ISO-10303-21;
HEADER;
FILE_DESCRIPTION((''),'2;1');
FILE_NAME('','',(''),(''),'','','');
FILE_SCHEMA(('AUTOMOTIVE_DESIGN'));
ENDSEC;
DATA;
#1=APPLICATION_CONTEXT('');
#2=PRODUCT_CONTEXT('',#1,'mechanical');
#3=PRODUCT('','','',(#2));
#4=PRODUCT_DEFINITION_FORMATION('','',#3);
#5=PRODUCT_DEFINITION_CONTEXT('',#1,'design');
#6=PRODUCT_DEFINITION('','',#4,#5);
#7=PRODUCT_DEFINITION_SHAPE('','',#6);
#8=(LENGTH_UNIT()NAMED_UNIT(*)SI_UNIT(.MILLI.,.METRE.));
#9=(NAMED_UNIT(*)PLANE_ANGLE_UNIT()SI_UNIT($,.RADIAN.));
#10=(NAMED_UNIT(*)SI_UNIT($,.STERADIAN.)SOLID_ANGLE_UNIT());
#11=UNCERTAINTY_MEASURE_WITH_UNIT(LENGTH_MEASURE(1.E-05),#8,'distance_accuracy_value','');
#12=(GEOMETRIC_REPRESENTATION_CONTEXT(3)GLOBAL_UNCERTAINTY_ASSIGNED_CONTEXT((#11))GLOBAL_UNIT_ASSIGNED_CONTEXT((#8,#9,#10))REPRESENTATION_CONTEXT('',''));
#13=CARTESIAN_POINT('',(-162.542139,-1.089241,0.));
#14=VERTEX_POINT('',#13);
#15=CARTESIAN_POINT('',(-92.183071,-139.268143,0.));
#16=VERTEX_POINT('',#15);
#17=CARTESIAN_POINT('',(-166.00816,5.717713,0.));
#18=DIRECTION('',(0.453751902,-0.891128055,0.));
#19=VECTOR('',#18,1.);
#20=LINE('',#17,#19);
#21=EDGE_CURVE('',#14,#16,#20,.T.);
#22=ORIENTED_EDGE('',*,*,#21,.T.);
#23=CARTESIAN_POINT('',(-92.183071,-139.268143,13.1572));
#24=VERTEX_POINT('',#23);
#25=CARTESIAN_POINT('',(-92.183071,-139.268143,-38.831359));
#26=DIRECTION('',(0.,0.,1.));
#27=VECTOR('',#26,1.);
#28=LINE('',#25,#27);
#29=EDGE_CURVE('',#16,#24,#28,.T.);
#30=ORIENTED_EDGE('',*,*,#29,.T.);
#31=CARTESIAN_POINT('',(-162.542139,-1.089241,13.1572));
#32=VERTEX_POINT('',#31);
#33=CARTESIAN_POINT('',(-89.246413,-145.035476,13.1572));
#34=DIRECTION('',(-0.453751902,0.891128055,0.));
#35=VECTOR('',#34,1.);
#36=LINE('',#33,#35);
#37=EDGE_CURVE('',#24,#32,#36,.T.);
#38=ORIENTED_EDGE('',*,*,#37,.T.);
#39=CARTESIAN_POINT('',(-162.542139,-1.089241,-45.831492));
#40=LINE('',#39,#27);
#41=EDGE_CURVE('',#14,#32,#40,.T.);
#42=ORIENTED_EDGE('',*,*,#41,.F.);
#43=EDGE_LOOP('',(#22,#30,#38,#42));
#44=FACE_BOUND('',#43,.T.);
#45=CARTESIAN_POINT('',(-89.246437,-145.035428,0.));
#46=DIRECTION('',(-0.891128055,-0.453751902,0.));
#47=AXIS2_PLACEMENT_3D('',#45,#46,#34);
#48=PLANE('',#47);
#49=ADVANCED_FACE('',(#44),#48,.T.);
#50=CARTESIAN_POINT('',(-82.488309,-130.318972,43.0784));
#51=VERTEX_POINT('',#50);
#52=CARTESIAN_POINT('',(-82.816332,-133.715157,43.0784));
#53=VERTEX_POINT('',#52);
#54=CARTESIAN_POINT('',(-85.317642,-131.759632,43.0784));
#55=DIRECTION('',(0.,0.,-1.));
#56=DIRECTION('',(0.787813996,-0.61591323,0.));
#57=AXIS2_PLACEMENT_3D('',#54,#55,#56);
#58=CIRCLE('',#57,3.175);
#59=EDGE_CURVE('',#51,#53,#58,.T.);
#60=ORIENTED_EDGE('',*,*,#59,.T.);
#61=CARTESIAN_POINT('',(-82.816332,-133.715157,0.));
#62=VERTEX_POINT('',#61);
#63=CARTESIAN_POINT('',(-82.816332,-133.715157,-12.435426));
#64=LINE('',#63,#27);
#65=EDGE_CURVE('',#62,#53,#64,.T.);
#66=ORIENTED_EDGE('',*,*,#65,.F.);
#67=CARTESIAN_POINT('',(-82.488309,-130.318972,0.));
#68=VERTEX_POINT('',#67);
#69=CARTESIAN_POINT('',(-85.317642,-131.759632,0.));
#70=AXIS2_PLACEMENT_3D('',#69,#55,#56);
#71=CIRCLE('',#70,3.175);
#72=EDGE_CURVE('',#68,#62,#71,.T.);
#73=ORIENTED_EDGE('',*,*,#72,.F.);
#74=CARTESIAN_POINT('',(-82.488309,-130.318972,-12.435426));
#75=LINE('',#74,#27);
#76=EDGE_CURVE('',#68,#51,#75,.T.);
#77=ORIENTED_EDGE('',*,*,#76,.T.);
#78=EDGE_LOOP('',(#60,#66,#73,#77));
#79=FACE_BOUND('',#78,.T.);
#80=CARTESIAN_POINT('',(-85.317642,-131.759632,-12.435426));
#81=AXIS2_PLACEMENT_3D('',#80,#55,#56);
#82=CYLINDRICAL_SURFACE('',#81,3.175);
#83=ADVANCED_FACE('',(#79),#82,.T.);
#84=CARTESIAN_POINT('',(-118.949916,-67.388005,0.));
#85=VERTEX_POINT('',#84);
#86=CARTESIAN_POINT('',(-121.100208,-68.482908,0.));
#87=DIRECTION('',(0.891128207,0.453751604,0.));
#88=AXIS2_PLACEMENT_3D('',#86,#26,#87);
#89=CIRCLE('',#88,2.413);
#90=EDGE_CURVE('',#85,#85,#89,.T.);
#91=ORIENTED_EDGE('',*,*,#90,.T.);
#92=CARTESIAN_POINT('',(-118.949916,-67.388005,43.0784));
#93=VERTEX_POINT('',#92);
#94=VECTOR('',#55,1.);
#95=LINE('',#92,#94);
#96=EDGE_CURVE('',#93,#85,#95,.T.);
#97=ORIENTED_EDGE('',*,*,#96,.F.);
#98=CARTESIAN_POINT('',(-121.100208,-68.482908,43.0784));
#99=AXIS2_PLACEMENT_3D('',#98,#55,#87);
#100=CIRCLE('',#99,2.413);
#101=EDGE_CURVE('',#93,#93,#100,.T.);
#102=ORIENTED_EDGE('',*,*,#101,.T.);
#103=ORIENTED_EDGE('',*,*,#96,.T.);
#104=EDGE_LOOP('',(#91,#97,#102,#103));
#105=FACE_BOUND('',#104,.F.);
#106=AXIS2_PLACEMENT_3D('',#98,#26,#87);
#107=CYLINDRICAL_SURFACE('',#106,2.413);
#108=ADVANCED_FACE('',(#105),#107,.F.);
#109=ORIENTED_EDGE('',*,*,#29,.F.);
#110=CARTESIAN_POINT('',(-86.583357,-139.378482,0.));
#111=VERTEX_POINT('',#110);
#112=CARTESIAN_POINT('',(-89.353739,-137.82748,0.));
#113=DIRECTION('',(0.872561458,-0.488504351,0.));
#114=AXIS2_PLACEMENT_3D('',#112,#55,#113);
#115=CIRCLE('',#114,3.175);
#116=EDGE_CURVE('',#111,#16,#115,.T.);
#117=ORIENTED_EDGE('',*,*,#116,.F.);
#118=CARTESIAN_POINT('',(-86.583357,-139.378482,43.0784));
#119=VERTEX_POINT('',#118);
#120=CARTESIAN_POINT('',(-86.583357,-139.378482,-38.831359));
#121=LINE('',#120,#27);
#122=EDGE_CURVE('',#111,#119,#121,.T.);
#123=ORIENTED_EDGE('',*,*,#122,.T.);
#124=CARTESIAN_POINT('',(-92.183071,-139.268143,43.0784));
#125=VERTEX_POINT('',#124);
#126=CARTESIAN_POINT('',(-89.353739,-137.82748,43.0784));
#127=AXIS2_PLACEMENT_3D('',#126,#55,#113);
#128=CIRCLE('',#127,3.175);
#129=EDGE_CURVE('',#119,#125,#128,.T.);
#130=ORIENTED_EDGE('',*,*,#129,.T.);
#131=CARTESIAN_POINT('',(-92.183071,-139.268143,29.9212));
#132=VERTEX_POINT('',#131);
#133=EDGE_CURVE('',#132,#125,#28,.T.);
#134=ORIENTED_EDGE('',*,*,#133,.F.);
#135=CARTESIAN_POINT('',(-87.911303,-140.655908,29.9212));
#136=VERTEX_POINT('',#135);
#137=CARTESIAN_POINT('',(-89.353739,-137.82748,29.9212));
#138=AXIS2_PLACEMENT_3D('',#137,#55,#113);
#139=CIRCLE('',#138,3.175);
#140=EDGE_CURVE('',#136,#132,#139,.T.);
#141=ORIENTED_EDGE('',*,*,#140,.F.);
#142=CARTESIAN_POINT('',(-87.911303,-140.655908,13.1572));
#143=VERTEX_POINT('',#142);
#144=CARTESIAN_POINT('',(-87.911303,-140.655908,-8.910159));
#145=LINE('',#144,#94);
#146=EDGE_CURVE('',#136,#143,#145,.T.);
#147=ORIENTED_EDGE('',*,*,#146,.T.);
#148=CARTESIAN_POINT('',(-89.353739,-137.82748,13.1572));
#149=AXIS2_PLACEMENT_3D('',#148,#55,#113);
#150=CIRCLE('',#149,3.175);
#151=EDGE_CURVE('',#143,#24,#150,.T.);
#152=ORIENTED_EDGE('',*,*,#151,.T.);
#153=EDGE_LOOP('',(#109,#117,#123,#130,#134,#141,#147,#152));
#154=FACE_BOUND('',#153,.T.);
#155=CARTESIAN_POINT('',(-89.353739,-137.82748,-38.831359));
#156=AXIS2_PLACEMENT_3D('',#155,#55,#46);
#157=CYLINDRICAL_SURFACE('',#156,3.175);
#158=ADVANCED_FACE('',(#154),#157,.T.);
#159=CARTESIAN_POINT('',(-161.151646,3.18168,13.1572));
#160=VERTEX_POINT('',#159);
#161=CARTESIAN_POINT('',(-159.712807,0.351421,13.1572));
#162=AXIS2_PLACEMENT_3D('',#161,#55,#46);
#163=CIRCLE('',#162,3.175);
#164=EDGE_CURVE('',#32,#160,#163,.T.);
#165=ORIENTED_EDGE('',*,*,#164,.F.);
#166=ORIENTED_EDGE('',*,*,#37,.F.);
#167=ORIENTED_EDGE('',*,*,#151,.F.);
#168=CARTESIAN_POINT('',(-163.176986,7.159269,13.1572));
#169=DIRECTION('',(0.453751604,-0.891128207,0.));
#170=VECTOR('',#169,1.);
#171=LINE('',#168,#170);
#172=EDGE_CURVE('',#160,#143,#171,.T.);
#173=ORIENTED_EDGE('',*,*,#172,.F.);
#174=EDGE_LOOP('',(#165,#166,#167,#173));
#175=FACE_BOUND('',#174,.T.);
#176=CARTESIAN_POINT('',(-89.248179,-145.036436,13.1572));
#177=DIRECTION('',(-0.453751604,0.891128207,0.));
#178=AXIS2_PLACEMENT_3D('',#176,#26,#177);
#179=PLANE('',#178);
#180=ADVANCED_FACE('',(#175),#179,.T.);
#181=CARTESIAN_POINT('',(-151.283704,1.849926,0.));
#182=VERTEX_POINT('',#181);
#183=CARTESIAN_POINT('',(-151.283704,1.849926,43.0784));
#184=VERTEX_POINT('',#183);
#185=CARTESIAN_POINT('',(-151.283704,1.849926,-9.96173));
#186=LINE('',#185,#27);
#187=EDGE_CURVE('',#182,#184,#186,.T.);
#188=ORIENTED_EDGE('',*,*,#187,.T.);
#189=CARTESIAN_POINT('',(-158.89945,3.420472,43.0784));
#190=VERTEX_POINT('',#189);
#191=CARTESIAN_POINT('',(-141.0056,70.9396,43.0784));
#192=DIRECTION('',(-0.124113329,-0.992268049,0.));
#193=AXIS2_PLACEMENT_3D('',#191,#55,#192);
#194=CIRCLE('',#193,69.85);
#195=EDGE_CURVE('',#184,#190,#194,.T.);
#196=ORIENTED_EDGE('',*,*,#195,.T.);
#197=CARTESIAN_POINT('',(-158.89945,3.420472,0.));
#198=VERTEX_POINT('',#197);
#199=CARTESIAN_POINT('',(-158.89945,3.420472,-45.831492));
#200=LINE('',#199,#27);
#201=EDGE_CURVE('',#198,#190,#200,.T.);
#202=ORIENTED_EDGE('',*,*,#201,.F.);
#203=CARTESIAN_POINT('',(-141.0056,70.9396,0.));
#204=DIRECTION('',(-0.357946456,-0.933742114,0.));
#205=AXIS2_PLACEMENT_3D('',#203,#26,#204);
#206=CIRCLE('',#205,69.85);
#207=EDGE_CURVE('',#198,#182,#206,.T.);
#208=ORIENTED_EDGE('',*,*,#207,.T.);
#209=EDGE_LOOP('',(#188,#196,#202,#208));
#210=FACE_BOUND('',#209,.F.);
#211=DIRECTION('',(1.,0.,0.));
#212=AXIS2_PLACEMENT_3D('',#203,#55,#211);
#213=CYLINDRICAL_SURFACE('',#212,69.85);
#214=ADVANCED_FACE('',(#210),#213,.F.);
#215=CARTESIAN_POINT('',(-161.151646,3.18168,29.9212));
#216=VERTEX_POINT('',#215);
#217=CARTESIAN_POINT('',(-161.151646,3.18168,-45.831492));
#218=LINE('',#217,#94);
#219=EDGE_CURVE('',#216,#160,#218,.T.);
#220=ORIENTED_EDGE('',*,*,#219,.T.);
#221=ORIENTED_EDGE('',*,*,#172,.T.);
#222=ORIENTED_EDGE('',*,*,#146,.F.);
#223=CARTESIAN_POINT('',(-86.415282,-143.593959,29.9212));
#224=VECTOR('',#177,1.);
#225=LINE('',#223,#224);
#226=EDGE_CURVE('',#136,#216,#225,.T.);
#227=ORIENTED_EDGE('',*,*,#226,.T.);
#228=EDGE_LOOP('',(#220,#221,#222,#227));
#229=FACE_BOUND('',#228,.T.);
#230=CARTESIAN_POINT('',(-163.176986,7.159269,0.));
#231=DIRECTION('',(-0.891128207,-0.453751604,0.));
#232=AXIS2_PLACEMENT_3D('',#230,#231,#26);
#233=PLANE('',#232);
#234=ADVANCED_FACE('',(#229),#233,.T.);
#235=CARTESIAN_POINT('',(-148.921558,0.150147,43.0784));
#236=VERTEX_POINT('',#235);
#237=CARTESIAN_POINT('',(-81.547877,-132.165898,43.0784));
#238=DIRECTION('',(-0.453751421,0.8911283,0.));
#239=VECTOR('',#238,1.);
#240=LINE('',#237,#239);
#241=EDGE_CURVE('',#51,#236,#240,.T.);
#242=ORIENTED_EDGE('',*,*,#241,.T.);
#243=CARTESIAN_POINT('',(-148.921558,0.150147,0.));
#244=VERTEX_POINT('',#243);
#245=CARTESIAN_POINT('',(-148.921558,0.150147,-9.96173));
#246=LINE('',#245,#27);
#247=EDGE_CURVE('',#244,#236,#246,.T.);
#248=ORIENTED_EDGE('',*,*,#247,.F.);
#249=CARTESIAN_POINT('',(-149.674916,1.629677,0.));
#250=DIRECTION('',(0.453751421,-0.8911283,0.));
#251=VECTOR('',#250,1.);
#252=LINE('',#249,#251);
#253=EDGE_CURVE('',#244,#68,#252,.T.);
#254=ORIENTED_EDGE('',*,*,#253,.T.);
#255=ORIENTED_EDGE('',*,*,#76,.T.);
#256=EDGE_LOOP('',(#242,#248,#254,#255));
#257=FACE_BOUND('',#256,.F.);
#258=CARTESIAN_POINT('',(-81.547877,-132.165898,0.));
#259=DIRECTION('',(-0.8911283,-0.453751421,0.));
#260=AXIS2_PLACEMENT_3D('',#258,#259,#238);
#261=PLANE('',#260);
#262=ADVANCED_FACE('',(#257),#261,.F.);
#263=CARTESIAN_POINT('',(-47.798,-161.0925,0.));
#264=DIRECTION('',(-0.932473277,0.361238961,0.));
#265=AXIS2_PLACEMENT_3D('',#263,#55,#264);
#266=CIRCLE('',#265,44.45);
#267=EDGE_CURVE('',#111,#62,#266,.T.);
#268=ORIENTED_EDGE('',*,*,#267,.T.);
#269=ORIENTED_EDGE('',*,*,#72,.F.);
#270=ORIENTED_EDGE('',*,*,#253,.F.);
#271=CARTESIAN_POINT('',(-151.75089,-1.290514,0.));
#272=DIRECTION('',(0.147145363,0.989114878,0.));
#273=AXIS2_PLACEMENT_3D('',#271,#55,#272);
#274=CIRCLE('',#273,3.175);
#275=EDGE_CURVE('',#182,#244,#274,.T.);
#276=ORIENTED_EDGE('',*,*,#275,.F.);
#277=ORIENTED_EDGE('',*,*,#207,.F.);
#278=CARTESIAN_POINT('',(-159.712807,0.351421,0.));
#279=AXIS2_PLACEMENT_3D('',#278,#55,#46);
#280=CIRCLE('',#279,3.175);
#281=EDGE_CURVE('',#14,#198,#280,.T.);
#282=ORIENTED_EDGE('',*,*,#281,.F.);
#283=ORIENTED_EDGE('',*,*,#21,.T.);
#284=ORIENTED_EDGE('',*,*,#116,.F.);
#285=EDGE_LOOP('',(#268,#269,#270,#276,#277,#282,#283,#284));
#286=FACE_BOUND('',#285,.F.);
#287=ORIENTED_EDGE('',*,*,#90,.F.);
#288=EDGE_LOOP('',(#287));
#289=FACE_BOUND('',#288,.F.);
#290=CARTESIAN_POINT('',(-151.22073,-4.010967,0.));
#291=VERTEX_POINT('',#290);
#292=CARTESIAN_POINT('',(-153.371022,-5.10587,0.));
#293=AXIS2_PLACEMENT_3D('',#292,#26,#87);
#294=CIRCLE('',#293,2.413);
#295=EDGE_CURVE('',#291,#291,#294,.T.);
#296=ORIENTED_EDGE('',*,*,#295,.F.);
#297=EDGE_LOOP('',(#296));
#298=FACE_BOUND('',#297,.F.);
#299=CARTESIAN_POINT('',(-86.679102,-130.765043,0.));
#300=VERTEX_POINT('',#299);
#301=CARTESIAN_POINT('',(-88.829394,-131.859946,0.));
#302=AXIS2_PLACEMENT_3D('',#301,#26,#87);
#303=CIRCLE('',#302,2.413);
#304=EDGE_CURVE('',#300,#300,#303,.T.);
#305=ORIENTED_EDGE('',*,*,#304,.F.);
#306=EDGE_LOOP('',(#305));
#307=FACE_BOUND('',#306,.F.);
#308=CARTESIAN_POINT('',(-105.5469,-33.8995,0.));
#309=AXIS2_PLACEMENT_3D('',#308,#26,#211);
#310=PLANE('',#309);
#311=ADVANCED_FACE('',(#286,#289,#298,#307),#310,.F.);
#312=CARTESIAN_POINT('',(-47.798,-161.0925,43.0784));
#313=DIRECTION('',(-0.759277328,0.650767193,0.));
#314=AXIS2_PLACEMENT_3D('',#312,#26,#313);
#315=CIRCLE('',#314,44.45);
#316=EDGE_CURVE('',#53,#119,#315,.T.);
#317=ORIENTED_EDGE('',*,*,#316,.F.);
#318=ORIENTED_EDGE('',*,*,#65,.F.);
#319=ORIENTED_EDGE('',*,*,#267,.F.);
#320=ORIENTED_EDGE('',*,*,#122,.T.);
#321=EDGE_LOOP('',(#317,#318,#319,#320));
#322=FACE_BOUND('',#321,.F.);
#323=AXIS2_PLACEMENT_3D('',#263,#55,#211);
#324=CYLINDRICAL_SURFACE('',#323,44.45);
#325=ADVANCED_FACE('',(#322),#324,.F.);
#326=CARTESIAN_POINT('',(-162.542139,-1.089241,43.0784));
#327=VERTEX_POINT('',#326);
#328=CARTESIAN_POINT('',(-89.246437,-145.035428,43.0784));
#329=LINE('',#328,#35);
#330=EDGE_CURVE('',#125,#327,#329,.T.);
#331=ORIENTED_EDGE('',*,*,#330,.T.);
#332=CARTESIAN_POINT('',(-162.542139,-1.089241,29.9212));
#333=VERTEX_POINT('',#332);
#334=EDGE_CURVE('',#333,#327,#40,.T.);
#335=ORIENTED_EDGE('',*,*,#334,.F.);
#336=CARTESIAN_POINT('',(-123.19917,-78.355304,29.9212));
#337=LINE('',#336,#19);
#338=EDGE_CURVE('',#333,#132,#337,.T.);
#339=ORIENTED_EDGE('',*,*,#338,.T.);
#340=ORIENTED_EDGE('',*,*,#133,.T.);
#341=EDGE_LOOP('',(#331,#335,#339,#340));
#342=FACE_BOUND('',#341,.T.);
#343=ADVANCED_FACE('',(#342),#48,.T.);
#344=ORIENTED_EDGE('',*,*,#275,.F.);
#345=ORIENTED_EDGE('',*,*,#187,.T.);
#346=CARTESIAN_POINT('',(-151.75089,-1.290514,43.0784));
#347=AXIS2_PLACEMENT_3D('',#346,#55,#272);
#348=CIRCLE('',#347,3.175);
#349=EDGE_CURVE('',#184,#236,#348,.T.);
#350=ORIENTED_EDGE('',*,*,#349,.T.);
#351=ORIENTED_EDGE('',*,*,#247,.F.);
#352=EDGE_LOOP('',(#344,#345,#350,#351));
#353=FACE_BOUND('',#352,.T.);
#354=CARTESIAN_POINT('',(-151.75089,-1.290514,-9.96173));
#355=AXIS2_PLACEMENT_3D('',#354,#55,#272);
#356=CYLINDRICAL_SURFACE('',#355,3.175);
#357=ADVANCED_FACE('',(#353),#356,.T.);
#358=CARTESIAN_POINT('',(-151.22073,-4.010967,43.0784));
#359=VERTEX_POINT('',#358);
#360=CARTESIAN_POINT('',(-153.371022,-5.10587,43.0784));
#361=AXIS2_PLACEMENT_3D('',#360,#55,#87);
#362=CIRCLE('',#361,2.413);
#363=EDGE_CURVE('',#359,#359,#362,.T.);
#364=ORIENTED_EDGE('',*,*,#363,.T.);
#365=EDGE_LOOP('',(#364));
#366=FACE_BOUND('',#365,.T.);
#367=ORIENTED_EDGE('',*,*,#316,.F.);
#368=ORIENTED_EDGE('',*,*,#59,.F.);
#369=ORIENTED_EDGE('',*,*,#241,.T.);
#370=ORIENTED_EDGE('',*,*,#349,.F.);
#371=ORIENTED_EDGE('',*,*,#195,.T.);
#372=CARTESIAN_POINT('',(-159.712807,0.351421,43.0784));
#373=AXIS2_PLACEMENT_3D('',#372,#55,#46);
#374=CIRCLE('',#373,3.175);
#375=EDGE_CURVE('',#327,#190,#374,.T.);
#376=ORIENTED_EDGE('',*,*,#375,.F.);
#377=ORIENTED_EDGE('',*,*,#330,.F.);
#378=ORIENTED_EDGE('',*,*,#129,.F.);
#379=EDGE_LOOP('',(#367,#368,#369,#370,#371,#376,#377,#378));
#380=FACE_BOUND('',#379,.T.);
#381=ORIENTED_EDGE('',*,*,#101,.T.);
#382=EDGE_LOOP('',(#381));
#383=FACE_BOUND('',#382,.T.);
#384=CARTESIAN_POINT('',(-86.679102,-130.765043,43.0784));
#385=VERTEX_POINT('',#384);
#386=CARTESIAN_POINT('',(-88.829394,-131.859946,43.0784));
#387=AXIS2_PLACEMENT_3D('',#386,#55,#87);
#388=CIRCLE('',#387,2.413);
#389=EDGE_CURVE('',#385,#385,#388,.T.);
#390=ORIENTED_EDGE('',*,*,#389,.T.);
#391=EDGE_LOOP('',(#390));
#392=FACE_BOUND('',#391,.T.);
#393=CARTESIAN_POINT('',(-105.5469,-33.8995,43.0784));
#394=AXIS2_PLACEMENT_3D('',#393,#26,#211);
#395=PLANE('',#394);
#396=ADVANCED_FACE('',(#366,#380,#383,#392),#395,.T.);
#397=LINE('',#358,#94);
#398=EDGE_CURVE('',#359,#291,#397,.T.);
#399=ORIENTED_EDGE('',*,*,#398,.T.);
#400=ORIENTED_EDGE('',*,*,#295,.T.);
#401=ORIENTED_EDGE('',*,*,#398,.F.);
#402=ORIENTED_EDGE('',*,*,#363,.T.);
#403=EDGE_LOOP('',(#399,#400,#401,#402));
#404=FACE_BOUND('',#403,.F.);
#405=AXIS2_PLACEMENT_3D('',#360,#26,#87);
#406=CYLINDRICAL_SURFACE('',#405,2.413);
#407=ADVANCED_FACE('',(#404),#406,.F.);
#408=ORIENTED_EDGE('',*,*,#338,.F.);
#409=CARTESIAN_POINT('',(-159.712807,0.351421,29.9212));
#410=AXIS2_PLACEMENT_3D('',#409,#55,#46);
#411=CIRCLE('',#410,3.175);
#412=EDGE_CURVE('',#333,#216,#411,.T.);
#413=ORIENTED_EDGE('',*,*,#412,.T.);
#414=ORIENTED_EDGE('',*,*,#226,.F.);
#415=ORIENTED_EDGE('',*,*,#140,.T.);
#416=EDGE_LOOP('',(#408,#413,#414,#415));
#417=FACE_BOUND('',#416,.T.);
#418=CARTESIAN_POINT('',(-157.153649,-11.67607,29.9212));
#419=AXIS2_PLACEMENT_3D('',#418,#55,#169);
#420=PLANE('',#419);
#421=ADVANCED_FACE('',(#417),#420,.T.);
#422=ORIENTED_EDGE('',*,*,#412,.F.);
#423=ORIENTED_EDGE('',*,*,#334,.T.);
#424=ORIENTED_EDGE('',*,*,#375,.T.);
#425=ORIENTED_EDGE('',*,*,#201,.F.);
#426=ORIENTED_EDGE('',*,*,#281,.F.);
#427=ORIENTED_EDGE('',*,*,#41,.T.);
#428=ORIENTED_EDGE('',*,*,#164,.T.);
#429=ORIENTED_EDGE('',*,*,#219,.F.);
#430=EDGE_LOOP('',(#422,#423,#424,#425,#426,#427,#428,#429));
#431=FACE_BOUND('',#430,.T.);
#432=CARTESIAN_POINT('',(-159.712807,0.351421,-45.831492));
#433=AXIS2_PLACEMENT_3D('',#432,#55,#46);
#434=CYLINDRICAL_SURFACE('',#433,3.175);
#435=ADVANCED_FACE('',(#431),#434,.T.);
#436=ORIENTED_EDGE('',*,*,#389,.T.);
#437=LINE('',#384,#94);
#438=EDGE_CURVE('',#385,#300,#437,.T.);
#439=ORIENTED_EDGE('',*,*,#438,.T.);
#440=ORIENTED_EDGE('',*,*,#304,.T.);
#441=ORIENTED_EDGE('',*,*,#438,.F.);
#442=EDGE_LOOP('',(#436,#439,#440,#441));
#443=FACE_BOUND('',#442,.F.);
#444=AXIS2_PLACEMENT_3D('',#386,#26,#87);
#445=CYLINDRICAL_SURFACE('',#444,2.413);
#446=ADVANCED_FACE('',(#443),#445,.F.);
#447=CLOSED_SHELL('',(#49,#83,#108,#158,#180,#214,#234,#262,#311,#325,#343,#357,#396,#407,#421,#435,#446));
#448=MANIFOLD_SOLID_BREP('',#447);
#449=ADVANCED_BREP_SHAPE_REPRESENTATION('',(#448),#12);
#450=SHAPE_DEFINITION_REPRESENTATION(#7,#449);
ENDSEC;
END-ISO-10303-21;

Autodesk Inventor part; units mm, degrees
ref_plane "Work Plane1" through (-105.5469, -33.8995, 0) normal (0, 0, 1) x (1, 0, 0)
sketch "Sketch1" plane through (-105.5469, -33.8995, 0) normal (0, 0, 1) x (1, 0, 0)
  circle A0 centre (51.4164, 20.6909) radius 2.413 projected
  circle A1 centre (61.5426, -29.0897) radius 2.413 projected
  circle A2 centre (41.2902, 70.4714) radius 2.413 projected
  circle A3 centre (71.6688, -78.8702) radius 2.413 projected
  circle A4 centre (27.8827, -36.0288) radius 3.175 projected
  line L0 (21.5564, -145.7309) -> (-91.4082, 76.2381) projected
  line L1 (59.5069, 74.2446) -> (98.755, -118.7966) projected
  line L2 (15.2228, 144.056) -> (44.9436, 105.9012) projected
  line L3 (63.6348, -131.723) -> (58.903, -119.9375) projected
  line L4 (53.0129, -122.3028) -> (57.7447, -134.0883) projected
  arc A5 (3.7348, 135.3868) -> (-79.7406, 82.2913) centre (-35.4587, 104.8391) ccw
  line L5 (3.7348, 135.3868) -> (33.4679, 97.2384)
  arc A6 (45.3974, 71.3204) -> (33.4679, 97.2384) centre (-15.7425, 58.8835) ccw
  line L6 (45.3974, 71.3204) -> (84.6647, -121.7179)
  arc A7 (33.2723, -139.6562) -> (84.6647, -121.7179) centre (57.7489, -127.193) ccw
  arc A8 (2.9524, 134.777) -> (-78.8566, 82.7414) centre (-35.4587, 104.8391) ccw
  line L7 (2.9524, 134.777) -> (32.6855, 96.6286)
  arc A9 (44.4253, 71.1227) -> (32.6855, 96.6286) centre (-15.7425, 58.8835) ccw
  line L8 (44.4253, 71.1227) -> (83.6926, -121.9156)
  arc A10 (34.1563, -139.2061) -> (83.6926, -121.9156) centre (57.7489, -127.193) ccw
  line L9 (34.1563, -139.2061) -> (-78.8566, 82.7414)
  arc A11 (-4.5602, 128.9216) -> (-70.3686, 87.0634) centre (-35.4587, 104.8391) ccw
  line L10 (-4.5602, 128.9216) -> (25.1729, 90.7732)
  arc A12 (35.0915, 69.224) -> (25.1729, 90.7732) centre (-15.7425, 58.8835) ccw
  line L11 (35.0915, 69.224) -> (74.3588, -123.8143)
  arc A13 (42.6443, -134.8841) -> (74.3588, -123.8143) centre (57.7489, -127.193) ccw
  line L12 (42.6443, -134.8841) -> (-70.3686, 87.0634)
  arc A14 (5.4566, 136.7288) -> (-81.686, 81.3007) centre (-35.4587, 104.8391) ccw
  line L13 (5.4566, 136.7288) -> (35.1897, 98.5804)
  arc A15 (47.5366, 71.7556) -> (35.1897, 98.5804) centre (-15.7425, 58.8835) ccw
  line L14 (47.5366, 71.7556) -> (86.8039, -121.2827)
  arc A16 (31.327, -140.6467) -> (86.8039, -121.2827) centre (57.7489, -127.193) ccw
  line L15 (31.327, -140.6467) -> (-81.686, 81.3007)
  circle A17 centre (57.7489, -127.193) radius 44.45
  circle A18 centre (-35.4587, 104.8391) radius 69.85
  circle A19 centre (-47.8242, 28.7936) radius 2.413 projected
  circle A20 centre (-15.5534, -34.5834) radius 2.413 projected
  circle A21 centre (16.7174, -97.9605) radius 2.413 projected
  line L16 (-33.1344, 24.0942) -> (34.7456, 18.5458) projected
  line L17 (36.5081, 12.9323) -> (-6.2049, -22.3208) projected
  line L18 (-20.7511, -20.2117) -> (-39.1333, 15.9083) projected
  line L19 (38.3036, 25.8999) -> (-20.4951, 30.706) projected
  line L20 (-21.5821, 36.7465) -> (30.7819, 61.2351) projected
  line L21 (44.0707, 55.5202) -> (48.097, 35.7165) projected
  line L22 (-53.0081, 43.1715) -> (-61.3301, 59.5239) projected
  line L23 (17.8998, 109.9146) -> (30.1007, 94.2514) projected
  line L24 (27.5547, 68.1378) -> (-5.8444, 52.5185) projected
  line L25 (27.1825, -114.3985) -> (25.3807, -110.8581) projected
  line L26 (32.1964, -96.6363) -> (38.137, -94.5724) projected
  line L27 (74.4344, -93.8236) -> (75.2107, -97.6416) projected
  line L28 (50.495, -96.7953) -> (49.4394, -94.1661) projected
  line L29 (51.3425, -89.9843) -> (60.23, -86.8964) projected
  line L30 (-10.1341, 54.212) -> (-12.6231, 60.4113) projected
  line L31 (-19.6913, 57.573) -> (-16.9128, 50.6526) projected
  line L32 (-18.5132, 46.5938) -> (-35.734, 38.5403) projected
  line L33 (42.124, -96.3889) -> (43.4268, -99.6336) projected
  arc A22 (40.3328, 7.2327) -> (41.7343, 8.6241) centre (33.4597, 15.5569) ccw projected
  arc A23 (45.6191, 9.409) -> (41.7343, 8.6241) centre (44.1679, 6.585) ccw projected
  arc A24 (45.6191, 9.409) -> (50.3997, 8.0475) centre (51.4164, 20.6909) ccw projected
  arc A25 (53.2564, 5.5162) -> (50.3997, 8.0475) centre (50.1452, 4.8827) ccw projected
  line L34 (53.2564, 5.5162) -> (57.2026, -13.8642) projected
  arc A26 (55.534, -17.3261) -> (57.2026, -13.8642) centre (54.0915, -14.4977) ccw projected
  arc A27 (55.534, -17.3261) -> (49.5198, -23.895) centre (61.311, -28.6529) ccw projected
  arc A28 (46.8024, -25.8738) -> (49.5198, -23.895) centre (46.5755, -22.7069) ccw projected
  line L35 (46.8024, -25.8738) -> (37.6772, -26.5277) projected
  arc A29 (35.5367, -25.8944) -> (37.6772, -26.5277) centre (37.4502, -23.3608) ccw projected
  arc A30 (35.5367, -25.8944) -> (18.8618, -27.0893) centre (27.8827, -36.0288) ccw projected
  arc A31 (16.8336, -28.0213) -> (18.8618, -27.0893) centre (16.6066, -24.8545) ccw projected
  line L36 (16.8336, -28.0213) -> (0.7655, -29.1728) projected
  arc A32 (-0.3587, -26.3652) -> (0.7655, -29.1728) centre (0.652, -27.5893) ccw projected
  line L37 (-0.3587, -26.3652) -> (40.3328, 7.2327) projected
  arc A33 (12.0706, -61.7398) -> (8.1483, -51.9706) centre (20.8352, -52.5488) ccw projected
  line L38 (25.9855, -70.6908) -> (17.4507, -83.8024) projected
  line L39 (11.5059, -83.5949) -> (-6.8763, -47.4749) projected
  line L40 (-0.2859, -37.1185) -> (-0.1921, -37.1119) projected
  line L41 (74.8789, -123.628) -> (78.6564, -122.8604) projected
  line L42 (0.38, 132.4063) -> (2.0588, 130.251) projected
  line L43 (38.7029, -137.0353) -> (37.8849, -135.428) projected
  line L44 (38.579, -133.2932) -> (44.3373, -130.3617) projected
  line L45 (12.0706, -61.7398) -> (13.7631, -65.9552) projected
  line L46 (17.8911, -67.7189) -> (22.1428, -66.0115) projected
  line L47 (2.9792, -39.0961) -> (8.1483, -51.9706) projected
  ellipse E0 centre (-34.8429, 105.035) end of major axis (-54.1736, 165.5211) minor radius 63.4728 (15.2228, 144.056) -> (-91.4082, 76.2381) ccw projected
  ellipse E1 centre (58.3238, -127.0129) end of major axis (45.7589, -87.6969) minor radius 41.2573 (21.5564, -145.7309) -> (98.755, -118.7966) ccw projected
  ellipse E2 centre (-15.1352, 59.076) end of major axis (-38.3321, 131.6593) minor radius 76.1674 (59.5069, 74.2446) -> (44.9436, 105.9012) ccw projected
  ellipse E3 centre (-34.8429, 105.035) end of major axis (-38.9507, 117.8883) minor radius 13.488 projected
  ellipse E4 centre (60.6898, -132.9057) end of major axis (59.7232, -129.8814) minor radius 3.1736 (57.7447, -134.0883) -> (63.6348, -131.723) ccw projected
  ellipse E5 centre (55.9579, -121.1202) end of major axis (54.9914, -118.0958) minor radius 3.1736 (58.903, -119.9375) -> (53.0129, -122.3028) ccw projected
  ellipse E6 centre (-47.0283, 29.0524) end of major axis (-50.8944, 41.1496) minor radius 12.6946 (-38.4497, 19.689) -> (-36.1193, 22.5544) ccw projected
  ellipse E7 centre (-33.3921, 20.9299) end of major axis (-34.3586, 23.9542) minor radius 3.1736 (-33.1344, 24.0942) -> (-36.1193, 22.5544) ccw projected
  ellipse E8 centre (34.4879, 15.3814) end of major axis (33.5214, 18.4057) minor radius 3.1736 (36.5081, 12.9323) -> (34.7456, 18.5458) ccw projected
  ellipse E9 centre (-8.2251, -19.8717) end of major axis (-7.2586, -22.896) minor radius 3.1736 (-9.5343, -22.7635) -> (-6.2049, -22.3208) ccw projected
  ellipse E10 centre (-14.7713, -34.3308) end of major axis (-18.6374, -22.2336) minor radius 12.6946 (-9.5343, -22.7635) -> (-17.2925, -21.8836) ccw projected
  ellipse E11 centre (-17.9228, -18.7718) end of major axis (-16.9563, -21.7962) minor radius 3.1736 (-20.7511, -20.2117) -> (-17.2925, -21.8836) ccw projected
  ellipse E12 centre (-36.305, 17.3481) end of major axis (-35.3385, 14.3238) minor radius 3.1736 (-38.4497, 19.689) -> (-39.1333, 15.9083) ccw projected
  ellipse E13 centre (38.5613, 29.0642) end of major axis (39.5278, 26.0399) minor radius 3.1736 (38.3036, 25.8999) -> (41.2885, 27.4397) ccw projected
  ellipse E14 centre (-20.2374, 33.8704) end of major axis (-19.2708, 30.8461) minor radius 3.1736 (-21.5821, 36.7465) -> (-20.4951, 30.706) ccw projected
  ellipse E15 centre (32.1266, 58.3589) end of major axis (31.1601, 61.3832) minor radius 3.1736 (34.1165, 60.8317) -> (30.7819, 61.2351) ccw projected
  ellipse E16 centre (42.0762, 70.723) end of major axis (38.2101, 82.8202) minor radius 12.6946 (34.1165, 60.8317) -> (41.1837, 58.0551) ccw projected
  ellipse E17 centre (40.9606, 54.8882) end of major axis (39.994, 57.9125) minor radius 3.1736 (44.0707, 55.5202) -> (41.1837, 58.0551) ccw projected
  ellipse E18 centre (44.9869, 35.0845) end of major axis (44.0204, 38.1088) minor radius 3.1736 (46.4291, 32.2559) -> (48.097, 35.7165) ccw projected
  ellipse E19 centre (-37.0786, 41.4165) end of major axis (-36.1121, 38.3922) minor radius 3.1736 (-39.0686, 38.9437) -> (-35.734, 38.5403) ccw projected
  ellipse E20 centre (-47.0283, 29.0524) end of major axis (-50.8944, 41.1496) minor radius 12.6946 (-39.0686, 38.9437) -> (-49.5495, 41.4996) ccw projected
  ellipse E21 centre (-50.1798, 44.6113) end of major axis (-49.2133, 41.587) minor radius 3.1736 (-53.0081, 43.1715) -> (-49.5495, 41.4996) ccw projected
  ellipse E22 centre (-58.5019, 60.9637) end of major axis (-57.5353, 57.9394) minor radius 3.1736 (-56.9933, 63.7566) -> (-61.3301, 59.5239) ccw projected
  ellipse E23 centre (-34.666, 105.0915) end of major axis (-48.9707, 149.8513) minor radius 46.9699 (-11.2596, 64.347) -> (12.228, 107.7818) ccw projected
  ellipse E24 centre (15.3966, 107.9636) end of major axis (14.43, 110.9879) minor radius 3.1736 (17.8998, 109.9146) -> (12.228, 107.7818) ccw projected
  ellipse E25 centre (-14.9584, 59.1325) end of major axis (2.4393, 4.6949) minor radius 57.1256 (35.8618, 85.223) -> (30.1007, 94.2514) ccw projected
  ellipse E26 centre (33.0385, 83.7735) end of major axis (32.0719, 86.7978) minor radius 3.1736 (34.846, 81.1634) -> (35.8618, 85.223) ccw projected
  ellipse E27 centre (42.0762, 70.723) end of major axis (38.2101, 82.8202) minor radius 12.6946 (34.846, 81.1634) -> (29.3832, 70.9558) ccw projected
  ellipse E28 centre (26.21, 71.014) end of major axis (25.2435, 74.0383) minor radius 3.1736 (27.5547, 68.1378) -> (29.3832, 70.9558) ccw projected
  ellipse E29 centre (58.5007, -126.9564) end of major axis (49.8019, -99.7376) minor radius 28.5628 (70.7406, -101.1419) -> (53.9461, -98.747) ccw projected
  ellipse E30 centre (30.0108, -112.9586) end of major axis (30.9773, -115.9829) minor radius 3.1736 (27.1825, -114.3985) -> (32.8598, -114.3584) ccw projected
  ellipse E31 centre (28.209, -109.4182) end of major axis (29.1755, -112.4425) minor radius 3.1736 (26.0643, -107.0774) -> (25.3807, -110.8581) ccw projected
  ellipse E32 centre (17.4857, -97.714) end of major axis (21.3519, -109.8112) minor radius 12.6946 (26.0643, -107.0774) -> (30.0878, -99.2512) ccw projected
  ellipse E33 centre (33.2384, -99.6355) end of major axis (34.2049, -102.6598) minor radius 3.1736 (32.1964, -96.6363) -> (30.0878, -99.2512) ccw projected
  ellipse E34 centre (61.272, -89.8956) end of major axis (60.3054, -86.8713) minor radius 3.1736 (63.5056, -87.6406) -> (60.23, -86.8964) ccw projected
  ellipse E35 centre (72.44, -78.6208) end of major axis (68.5739, -66.5236) minor radius 12.6946 (63.5056, -87.6406) -> (71.5475, -91.2887) ccw projected
  ellipse E36 centre (71.3244, -94.4556) end of major axis (70.3578, -91.4313) minor radius 3.1736 (74.4344, -93.8236) -> (71.5475, -91.2887) ccw projected
  ellipse E37 centre (72.1006, -98.2736) end of major axis (73.0671, -101.2979) minor radius 3.1736 (70.7406, -101.1419) -> (75.2107, -97.6416) ccw projected
  ellipse E38 centre (58.5007, -126.9564) end of major axis (49.8019, -99.7376) minor radius 28.5628 (42.2836, -103.4303) -> (32.8598, -114.3584) ccw projected
  ellipse E39 centre (-34.666, 105.0915) end of major axis (-48.9707, 149.8513) minor radius 46.9699 (-56.9933, 63.7566) -> (-23.3977, 59.4727) ccw projected
  ellipse E40 centre (53.44, -95.6126) end of major axis (54.4066, -98.6369) minor radius 3.1736 (50.495, -96.7953) -> (53.9461, -98.747) ccw projected
  ellipse E41 centre (52.3844, -92.9835) end of major axis (53.351, -96.0078) minor radius 3.1736 (51.3425, -89.9843) -> (49.4394, -94.1661) ccw projected
  ellipse E42 centre (-7.1891, 55.3946) end of major axis (-6.2225, 52.3703) minor radius 3.1736 (-10.1341, 54.212) -> (-5.8444, 52.5185) ccw projected
  ellipse E43 centre (-9.6781, 61.594) end of major axis (-8.7115, 58.5697) minor radius 3.1736 (-11.2596, 64.347) -> (-12.6231, 60.4113) ccw projected
  ellipse E44 centre (-19.8578, 49.4699) end of major axis (-20.8244, 52.4943) minor radius 3.1736 (-18.5132, 46.5938) -> (-16.9128, 50.6526) ccw projected
  ellipse E45 centre (-22.6364, 56.3903) end of major axis (-23.6029, 59.4146) minor radius 3.1736 (-19.6913, 57.573) -> (-23.3977, 59.4727) ccw projected
  ellipse E46 centre (39.179, -97.5715) end of major axis (38.2124, -94.5472) minor radius 3.1736 (42.124, -96.3889) -> (38.137, -94.5724) ccw projected
  ellipse E47 centre (40.4817, -100.8163) end of major axis (39.5152, -97.792) minor radius 3.1736 (42.2836, -103.4303) -> (43.4268, -99.6336) ccw projected
  ellipse E48 centre (14.791, -82.0695) end of major axis (15.7575, -85.0938) minor radius 3.1736 (15.3299, -85.1984) -> (17.4507, -83.8024) ccw projected
  ellipse E49 centre (17.4857, -97.714) end of major axis (13.6196, -85.6168) minor radius 12.6946 (15.3299, -85.1984) -> (14.9645, -85.2668) ccw projected
  ellipse E50 centre (14.3342, -82.155) end of major axis (15.3007, -85.1793) minor radius 3.1736 (11.5059, -83.5949) -> (14.9645, -85.2668) ccw projected
  ellipse E51 centre (-4.048, -46.035) end of major axis (-3.0815, -49.0593) minor radius 3.1736 (-6.1927, -43.6942) -> (-6.8763, -47.4749) ccw projected
  ellipse E52 centre (-14.7713, -34.3308) end of major axis (-10.9051, -46.428) minor radius 12.6946 (-6.1927, -43.6942) -> (-3.002, -39.0945) ccw projected
  ellipse E53 centre (-0.0597, -40.2854) end of major axis (-1.0262, -37.2611) minor radius 3.1736 (-0.2859, -37.1185) -> (-3.002, -39.0945) ccw projected
  ellipse E54 centre (-75.9068, 106.3278) end of major axis (-76.8733, 109.3521) minor radius 3.1736 (-73.3969, 108.2703) -> (-79.0792, 106.4229) ccw projected
  ellipse E55 centre (-58.3372, 119.9252) end of major axis (-64.1365, 138.071) minor radius 19.0419 (-73.3969, 108.2703) -> (-70.1692, 105.0022) ccw projected
  ellipse E56 centre (-72.1411, 102.5151) end of major axis (-73.1077, 105.5394) minor radius 3.1736 (-69.8464, 100.3213) -> (-70.1692, 105.0022) ccw projected
  ellipse E57 centre (-56.078, 87.1583) end of major axis (-61.8772, 105.3042) minor radius 19.0419 (-69.8464, 100.3213) -> (-72.5951, 96.6423) ccw projected
  ellipse E58 centre (-75.348, 98.223) end of major axis (-74.3814, 95.1987) minor radius 3.1736 (-78.4773, 97.6947) -> (-72.5951, 96.6423) ccw projected
  ellipse E59 centre (-34.666, 105.0915) end of major axis (-21.1345, 62.7512) minor radius 44.431 (-79.0792, 106.4229) -> (-78.4773, 97.6947) ccw projected
  ellipse E60 centre (-46.2445, 144.7092) end of major axis (-47.211, 147.7336) minor radius 3.1736 (-43.6215, 142.9211) -> (-47.1351, 147.7568) ccw projected
  ellipse E61 centre (-27.8837, 132.1924) end of major axis (-33.6829, 150.3383) minor radius 19.0419 (-43.6215, 142.9211) -> (-45.7303, 138.8412) ccw projected
  ellipse E62 centre (-48.7048, 139.9494) end of major axis (-47.7382, 136.925) minor radius 3.1736 (-50.0809, 137.0888) -> (-45.7303, 138.8412) ccw projected
  ellipse E63 centre (-58.3372, 119.9252) end of major axis (-64.1365, 138.071) minor radius 19.0419 (-50.0809, 137.0888) -> (-54.4286, 138.5679) ccw projected
  ellipse E64 centre (-53.7771, 141.675) end of major axis (-52.8106, 138.6507) minor radius 3.1736 (-55.2472, 144.4891) -> (-54.4286, 138.5679) ccw projected
  ellipse E65 centre (-34.666, 105.0915) end of major axis (-21.1345, 62.7512) minor radius 44.431 (-47.1351, 147.7568) -> (-55.2472, 144.4891) ccw projected
  ellipse E66 centre (78.9727, -124.4161) end of major axis (78.4894, -122.9039) minor radius 1.5868 (80.5474, -124.2206) -> (78.6564, -122.8604) ccw projected
  ellipse E67 centre (58.5007, -126.9564) end of major axis (51.735, -105.7862) minor radius 22.2155 (79.7691, -133.3844) -> (80.5474, -124.2206) ccw projected
  ellipse E68 centre (76.7308, -132.4661) end of major axis (77.6973, -135.4904) minor radius 3.1736 (73.5579, -132.5427) -> (79.7691, -133.3844) ccw projected
  ellipse E69 centre (60.8666, -132.8492) end of major axis (64.7328, -144.9464) minor radius 12.6946 (73.5579, -132.5427) -> (72.5825, -127.9613) ccw projected
  ellipse E70 centre (75.5115, -126.7394) end of major axis (74.545, -123.7151) minor radius 3.1736 (74.8789, -123.628) -> (72.5825, -127.9613) ccw projected
  ellipse E71 centre (-0.4445, 128.2999) end of major axis (0.522, 125.2756) minor radius 3.1736 (-1.3529, 125.2581) -> (2.0588, 130.251) ccw projected
  ellipse E72 centre (-6.8031, 107.0071) end of major axis (-12.6023, 125.153) minor radius 19.0419 (-1.3529, 125.2581) -> (-6.001, 126.0393) ccw projected
  ellipse E73 centre (-5.8673, 129.2113) end of major axis (-4.9008, 126.187) minor radius 3.1736 (-9.0125, 129.6372) -> (-6.001, 126.0393) ccw projected
  ellipse E74 centre (-27.8837, 132.1924) end of major axis (-33.6829, 150.3383) minor radius 19.0419 (-9.0125, 129.6372) -> (-8.9508, 134.2302) ccw projected
  ellipse E75 centre (-5.7954, 134.5699) end of major axis (-6.7619, 137.5942) minor radius 3.1736 (-3.5745, 136.8374) -> (-8.9508, 134.2302) ccw projected
  ellipse E76 centre (-34.666, 105.0915) end of major axis (-21.1345, 62.7512) minor radius 44.431 (0.38, 132.4063) -> (-3.5745, 136.8374) ccw projected
  ellipse E77 centre (39.299, -134.708) end of major axis (39.7823, -136.2202) minor radius 1.5868 (38.579, -133.2932) -> (37.8849, -135.428) ccw projected
  ellipse E78 centre (45.0573, -131.7765) end of major axis (44.5741, -130.2644) minor radius 1.5868 (46.551, -131.2409) -> (44.3373, -130.3617) ccw projected
  ellipse E79 centre (58.5007, -126.9564) end of major axis (54.6346, -114.8592) minor radius 12.6946 (46.551, -131.2409) -> (48.2775, -134.4832) ccw projected
  ellipse E80 centre (60.8666, -132.8492) end of major axis (64.7328, -144.9464) minor radius 12.6946 (48.2775, -134.4832) -> (51.4877, -141.4055) ccw projected
  ellipse E81 centre (49.1429, -143.5446) end of major axis (48.1764, -140.5202) minor radius 3.1736 (47.5833, -146.3092) -> (51.4877, -141.4055) ccw projected
  ellipse E82 centre (58.5007, -126.9564) end of major axis (51.735, -105.7862) minor radius 22.2155 (38.7029, -137.0353) -> (47.5833, -146.3092) ccw projected
  ellipse E83 centre (52.1975, 20.9417) end of major axis (48.3314, 33.0389) minor radius 12.6946 (46.4291, 32.2559) -> (41.2885, 27.4397) ccw projected
  ellipse E84 centre (16.7081, -64.7725) end of major axis (17.6747, -67.7968) minor radius 3.1736 (13.7631, -65.9552) -> (17.8911, -67.7189) ccw projected
  ellipse E85 centre (23.3258, -68.9579) end of major axis (22.3593, -65.9336) minor radius 3.1736 (25.9855, -70.6908) -> (22.1428, -66.0115) ccw projected
  ellipse E86 centre (0.0342, -40.2787) end of major axis (-0.9324, -37.2544) minor radius 3.1736 (2.9792, -39.0961) -> (-0.1921, -37.1119) ccw projected
  ellipse E87 centre (45.8902, -59.8967) end of major axis (44.9237, -56.8724) minor radius 3.1736 (44.7072, -56.9504) -> (43.2305, -58.1638) ccw projected
  line L48 (44.7072, -56.9504) -> (46.8705, -56.0816) projected
  ellipse E88 centre (45.6876, -53.1353) end of major axis (44.721, -50.111) minor radius 3.1736 (46.8705, -56.0816) -> (48.6792, -52.0758) ccw projected
  ellipse E89 centre (51.6707, -51.0164) end of major axis (50.7042, -47.9921) minor radius 3.1736 (49.011, -49.2835) -> (48.6792, -52.0758) ccw projected
  line L49 (49.011, -49.2835) -> (53.8355, -41.872) projected
  line L50 (25.969, -84.6816) -> (43.2305, -58.1638) projected
  ellipse E90 centre (-17.6922, -49.6994) end of major axis (-15.8961, -55.3194) minor radius 5.8975 (-22.8057, -52.6378) -> (-14.6753, -44.6307) ccw projected
  ellipse E91 centre (-17.6417, -49.6706) end of major axis (-16.9644, -51.79) minor radius 2.224 projected
  ellipse E92 centre (56.4952, -43.6049) end of major axis (55.5287, -40.5806) minor radius 3.1736 (57.6599, -40.6518) -> (53.8355, -41.872) ccw projected
  ellipse E93 centre (62.3188, -28.8395) end of major axis (58.4526, -16.7423) minor radius 12.6946 (57.6599, -40.6518) -> (61.4262, -41.5074) ccw projected
  ellipse E94 centre (61.2031, -44.6744) end of major axis (60.2366, -41.6501) minor radius 3.1736 (64.3132, -44.0423) -> (61.4262, -41.5074) ccw projected
  line L51 (64.3132, -44.0423) -> (68.3396, -63.846) projected
  ellipse E95 centre (65.2295, -64.478) end of major axis (64.2629, -61.4537) minor radius 3.1736 (66.6716, -67.3066) -> (68.3396, -63.846) ccw projected
  ellipse E96 centre (72.44, -78.6208) end of major axis (68.5739, -66.5236) minor radius 12.6946 (66.6716, -67.3066) -> (59.8379, -77.0836) ccw projected
  ellipse E97 centre (56.6874, -76.6993) end of major axis (55.7209, -73.675) minor radius 3.1736 (57.7293, -79.6984) -> (59.8379, -77.0836) ccw projected
  line L52 (57.7293, -79.6984) -> (29.6957, -89.4384) projected
  ellipse E98 centre (28.6538, -86.4392) end of major axis (29.6203, -89.4635) minor radius 3.1736 (26.4202, -88.6942) -> (29.6957, -89.4384) ccw projected
  ellipse E99 centre (17.4857, -97.714) end of major axis (21.3519, -109.8112) minor radius 12.6946 (26.4202, -88.6942) -> (26.4002, -88.6744) ccw projected
  ellipse E100 centre (28.6288, -86.4145) end of major axis (27.6622, -83.3902) minor radius 3.1736 (25.969, -84.6816) -> (26.4002, -88.6744) ccw projected
  point P0 (105.5469, 33.8995)
  point P1 (-44.128, 35.5292)
  point P2 (-60.4612, 39.6172)
  point P3 (16.3005, -111.136)
  point P4 (23.999, -98.2664)
  point P5 (-35.4703, 104.8623)
  point P6 (57.7373, -127.1698)
  dimension "d0" = 12.7
  dimension "d1" = 9.525
  dimension "d2" = 88.9
  dimension "d3" = 139.7
ref_plane "Work Plane2" through (-41.9854, -105.2288, 43.0784) normal (0, 0, 1) x (1, 0, 0)
extrude "Extrusion1" add sketch "Sketch1" along normal up to surface (43.0784 mm away) contours L15 E90 L9 A17 | A18 L9 E90 L15 | L9 E90 A18 L12 E6 E12 L18 E11 E10 E52 E51 L39 E50 E49 E48 A17 | L9 E90 | E48 E49 E50 L39 E51 E52 L12 | L12 E10 E11 L18 E12 E6 | A19 | A20 | A21
sketch "Sketch2" plane through (-166.0081, 5.7177, 0) normal (-0.8911282, -0.4537516, 0) x (0, 0, 1)
  spline S0 degree 3 number of poles 454
  line L0 (43.0784, -169.1712) -> (43.0784, 0)
  line L1 (0, 0) -> (43.0784, 0)
  line L2 (0, 0) -> (0, -169.1712)
  line L3 (0, -169.1712) -> (43.0784, -169.1712)
  line L4 (13.1572, -174.2662) -> (29.9212, -174.2662)
  line L5 (13.1572, -174.2662) -> (13.1572, -19.5178)
  line L6 (13.1572, -19.5178) -> (29.9212, -19.5178)
  line L7 (29.9212, -19.5178) -> (29.9212, -174.2662)
  line L8 (13.1572, -19.5178) -> (13.1572, 0)
  line L9 (29.9212, -19.5178) -> (29.9212, 0)
  point P0 (0, -80.4217)
  point P1 (13.1572, -169.1712)
  point P2 (29.9212, -169.1712)
extrude "Extrusion2" cut sketch "Sketch2" against normal blind 3.175 contours L3 L5 L6 L7 | L9 L6 L8 L1
fillet "Fillet1" radius 3.175 5 edges at (-89.2464, -145.0355, 6.5786) (-89.2464, -145.0355, 36.4998) (-81.5478, -132.1659, 21.5392) (-149.6749, 1.6297, 21.5392) (-166.0081, 5.7177, 6.5786)
sketch "Sketch3" plane through (-92.183, -139.2682, 43.0784) normal (0, 0, 1) x (0.8911282, 0.4537516, 0)
  line L0 (6.35, 5.08) -> (6.35, 156.499)
  arc A0 (5.2924, 157.4265) -> (11.3663, 152.5714) centre (51.875, 209.4754) ccw projected
  circle A1 centre (6.35, 5.08) radius 2.413
  arc A2 (0, 0) -> (4.94, -2.6392) centre (3.175, 0) ccw projected
  circle A3 centre (6.35, 76.2) radius 2.413
  circle A4 centre (6.35, 147.32) radius 2.413
  point P0 (145.3401, 82.2776)
  dimension "d9" = 4.826
  dimension "d10" = 5.08
  dimension "d13" = 71.12
ref_plane "Work Plane3" through (-228.5882, -244.5835, 0) normal (0, 0, 1) x (1, 0, 0)
extrude "Extrusion3" cut sketch "Sketch3" against normal up to surface (43.0784 mm away)
thread "Thread1" size "10-24 UNC" class "2B" standard "ANSI Unified Screw Threads" full length
thread "Thread2" size "10-24 UNC" class "2B" standard "ANSI Unified Screw Threads" full length
thread "Thread3" size "10-24 UNC" class "2B" standard "ANSI Unified Screw Threads" full length
sketch "Sketch4" plane through (-148.9216, 0.1502, 43.0784) normal (0.8911282, 0.4537516, 0) x (0, 0, -1)
  line L0 (0, 0) -> (43.0784, 0) projected
  line L1 (0, 0) -> (0, -146.409) projected
  line L2 (43.0784, -146.409) -> (0, -146.409) projected
  line L3 (43.0784, -146.409) -> (43.0784, 0) projected
  line L4 (0, 2.5865) -> (0, 0) projected
  line L5 (0, 0) -> (43.0784, 0) projected
  line L6 (43.0784, 0) -> (43.0784, 2.5865) projected
  line L7 (43.0784, 2.5865) -> (0, 2.5865) projected
  line L8 (13.1572, 5.0759) -> (0, 5.0759) projected
  line L9 (0, 5.0759) -> (0, 7.4417) projected
  line L10 (0, 7.4417) -> (43.0784, 7.4417) projected
  line L11 (43.0784, 7.4417) -> (43.0784, 5.0759) projected
  line L12 (43.0784, 5.0759) -> (29.9212, 5.0759) projected
  line L13 (29.9212, 5.0759) -> (29.9212, 8.2509) projected
  line L14 (29.9212, 8.2509) -> (13.1572, 8.2509) projected
  line L15 (13.1572, 8.2509) -> (13.1572, 5.0759) projected
  line L16 (13.1572, 5.0759) -> (0, 5.0759) projected
  line L17 (0, 7.4417) -> (43.0784, 7.4417) projected
  line L18 (0, 7.4417) -> (0, 2.5865) projected
  line L19 (43.0784, 2.5865) -> (0, 2.5865) projected
  line L20 (43.0784, 2.5865) -> (43.0784, 7.4417) projected
  line L21 (0, -152.624) -> (0, -149.9848) projected
  line L22 (0, -149.9848) -> (13.1572, -149.9848) projected
  line L23 (13.1572, -149.9848) -> (13.1572, -153.1598) projected
  line L24 (13.1572, -153.1598) -> (29.9212, -153.1598) projected
  line L25 (29.9212, -153.1598) -> (29.9212, -149.9848) projected
  line L26 (43.0784, -149.9848) -> (29.9212, -149.9848) projected
  line L27 (43.0784, -149.9848) -> (43.0784, -152.624) projected
  line L28 (43.0784, -152.624) -> (0, -152.624) projected
  line L29 (0, -149.2865) -> (43.0784, -149.2865) projected
  line L30 (0, -149.2865) -> (0, -152.624) projected
  line L31 (43.0784, -152.624) -> (0, -152.624) projected
  line L32 (43.0784, -152.624) -> (43.0784, -149.2865) projected
  line L33 (0, -146.409) -> (0, -149.2865) projected
  line L34 (0, -149.2865) -> (43.0784, -149.2865) projected
  line L35 (43.0784, -149.2865) -> (43.0784, -146.409) projected
  line L36 (43.0784, -146.409) -> (0, -146.409) projected
  line L37 (43.0784, -153.1598) -> (0, -153.1598) projected
  line L38 (0, -152.624) -> (0, -149.9848) projected
  line L39 (0, -149.9848) -> (13.1572, -149.9848) projected
  line L40 (13.1572, -149.9848) -> (13.1572, -153.1598) projected
  line L41 (13.1572, -153.1598) -> (29.9212, -153.1598) projected
  line L42 (29.9212, -153.1598) -> (29.9212, -149.9848) projected
  line L43 (43.0784, -149.9848) -> (29.9212, -149.9848) projected
  line L44 (43.0784, -149.9848) -> (43.0784, -152.624) projected
  line L45 (43.0784, -152.624) -> (0, -152.624) projected
  line L46 (0, -153.1598) -> (43.0784, -153.1598)
  line L47 (43.0784, -153.1598) -> (43.0784, 7.4417)
  line L48 (43.0784, 7.4417) -> (0, 7.4417)
  line L49 (0, 7.4417) -> (0, -153.1598)
  point P0 (43.0784, -67.7072)
properties part number "flat chain guide" material "Polyethylene, High Density"
